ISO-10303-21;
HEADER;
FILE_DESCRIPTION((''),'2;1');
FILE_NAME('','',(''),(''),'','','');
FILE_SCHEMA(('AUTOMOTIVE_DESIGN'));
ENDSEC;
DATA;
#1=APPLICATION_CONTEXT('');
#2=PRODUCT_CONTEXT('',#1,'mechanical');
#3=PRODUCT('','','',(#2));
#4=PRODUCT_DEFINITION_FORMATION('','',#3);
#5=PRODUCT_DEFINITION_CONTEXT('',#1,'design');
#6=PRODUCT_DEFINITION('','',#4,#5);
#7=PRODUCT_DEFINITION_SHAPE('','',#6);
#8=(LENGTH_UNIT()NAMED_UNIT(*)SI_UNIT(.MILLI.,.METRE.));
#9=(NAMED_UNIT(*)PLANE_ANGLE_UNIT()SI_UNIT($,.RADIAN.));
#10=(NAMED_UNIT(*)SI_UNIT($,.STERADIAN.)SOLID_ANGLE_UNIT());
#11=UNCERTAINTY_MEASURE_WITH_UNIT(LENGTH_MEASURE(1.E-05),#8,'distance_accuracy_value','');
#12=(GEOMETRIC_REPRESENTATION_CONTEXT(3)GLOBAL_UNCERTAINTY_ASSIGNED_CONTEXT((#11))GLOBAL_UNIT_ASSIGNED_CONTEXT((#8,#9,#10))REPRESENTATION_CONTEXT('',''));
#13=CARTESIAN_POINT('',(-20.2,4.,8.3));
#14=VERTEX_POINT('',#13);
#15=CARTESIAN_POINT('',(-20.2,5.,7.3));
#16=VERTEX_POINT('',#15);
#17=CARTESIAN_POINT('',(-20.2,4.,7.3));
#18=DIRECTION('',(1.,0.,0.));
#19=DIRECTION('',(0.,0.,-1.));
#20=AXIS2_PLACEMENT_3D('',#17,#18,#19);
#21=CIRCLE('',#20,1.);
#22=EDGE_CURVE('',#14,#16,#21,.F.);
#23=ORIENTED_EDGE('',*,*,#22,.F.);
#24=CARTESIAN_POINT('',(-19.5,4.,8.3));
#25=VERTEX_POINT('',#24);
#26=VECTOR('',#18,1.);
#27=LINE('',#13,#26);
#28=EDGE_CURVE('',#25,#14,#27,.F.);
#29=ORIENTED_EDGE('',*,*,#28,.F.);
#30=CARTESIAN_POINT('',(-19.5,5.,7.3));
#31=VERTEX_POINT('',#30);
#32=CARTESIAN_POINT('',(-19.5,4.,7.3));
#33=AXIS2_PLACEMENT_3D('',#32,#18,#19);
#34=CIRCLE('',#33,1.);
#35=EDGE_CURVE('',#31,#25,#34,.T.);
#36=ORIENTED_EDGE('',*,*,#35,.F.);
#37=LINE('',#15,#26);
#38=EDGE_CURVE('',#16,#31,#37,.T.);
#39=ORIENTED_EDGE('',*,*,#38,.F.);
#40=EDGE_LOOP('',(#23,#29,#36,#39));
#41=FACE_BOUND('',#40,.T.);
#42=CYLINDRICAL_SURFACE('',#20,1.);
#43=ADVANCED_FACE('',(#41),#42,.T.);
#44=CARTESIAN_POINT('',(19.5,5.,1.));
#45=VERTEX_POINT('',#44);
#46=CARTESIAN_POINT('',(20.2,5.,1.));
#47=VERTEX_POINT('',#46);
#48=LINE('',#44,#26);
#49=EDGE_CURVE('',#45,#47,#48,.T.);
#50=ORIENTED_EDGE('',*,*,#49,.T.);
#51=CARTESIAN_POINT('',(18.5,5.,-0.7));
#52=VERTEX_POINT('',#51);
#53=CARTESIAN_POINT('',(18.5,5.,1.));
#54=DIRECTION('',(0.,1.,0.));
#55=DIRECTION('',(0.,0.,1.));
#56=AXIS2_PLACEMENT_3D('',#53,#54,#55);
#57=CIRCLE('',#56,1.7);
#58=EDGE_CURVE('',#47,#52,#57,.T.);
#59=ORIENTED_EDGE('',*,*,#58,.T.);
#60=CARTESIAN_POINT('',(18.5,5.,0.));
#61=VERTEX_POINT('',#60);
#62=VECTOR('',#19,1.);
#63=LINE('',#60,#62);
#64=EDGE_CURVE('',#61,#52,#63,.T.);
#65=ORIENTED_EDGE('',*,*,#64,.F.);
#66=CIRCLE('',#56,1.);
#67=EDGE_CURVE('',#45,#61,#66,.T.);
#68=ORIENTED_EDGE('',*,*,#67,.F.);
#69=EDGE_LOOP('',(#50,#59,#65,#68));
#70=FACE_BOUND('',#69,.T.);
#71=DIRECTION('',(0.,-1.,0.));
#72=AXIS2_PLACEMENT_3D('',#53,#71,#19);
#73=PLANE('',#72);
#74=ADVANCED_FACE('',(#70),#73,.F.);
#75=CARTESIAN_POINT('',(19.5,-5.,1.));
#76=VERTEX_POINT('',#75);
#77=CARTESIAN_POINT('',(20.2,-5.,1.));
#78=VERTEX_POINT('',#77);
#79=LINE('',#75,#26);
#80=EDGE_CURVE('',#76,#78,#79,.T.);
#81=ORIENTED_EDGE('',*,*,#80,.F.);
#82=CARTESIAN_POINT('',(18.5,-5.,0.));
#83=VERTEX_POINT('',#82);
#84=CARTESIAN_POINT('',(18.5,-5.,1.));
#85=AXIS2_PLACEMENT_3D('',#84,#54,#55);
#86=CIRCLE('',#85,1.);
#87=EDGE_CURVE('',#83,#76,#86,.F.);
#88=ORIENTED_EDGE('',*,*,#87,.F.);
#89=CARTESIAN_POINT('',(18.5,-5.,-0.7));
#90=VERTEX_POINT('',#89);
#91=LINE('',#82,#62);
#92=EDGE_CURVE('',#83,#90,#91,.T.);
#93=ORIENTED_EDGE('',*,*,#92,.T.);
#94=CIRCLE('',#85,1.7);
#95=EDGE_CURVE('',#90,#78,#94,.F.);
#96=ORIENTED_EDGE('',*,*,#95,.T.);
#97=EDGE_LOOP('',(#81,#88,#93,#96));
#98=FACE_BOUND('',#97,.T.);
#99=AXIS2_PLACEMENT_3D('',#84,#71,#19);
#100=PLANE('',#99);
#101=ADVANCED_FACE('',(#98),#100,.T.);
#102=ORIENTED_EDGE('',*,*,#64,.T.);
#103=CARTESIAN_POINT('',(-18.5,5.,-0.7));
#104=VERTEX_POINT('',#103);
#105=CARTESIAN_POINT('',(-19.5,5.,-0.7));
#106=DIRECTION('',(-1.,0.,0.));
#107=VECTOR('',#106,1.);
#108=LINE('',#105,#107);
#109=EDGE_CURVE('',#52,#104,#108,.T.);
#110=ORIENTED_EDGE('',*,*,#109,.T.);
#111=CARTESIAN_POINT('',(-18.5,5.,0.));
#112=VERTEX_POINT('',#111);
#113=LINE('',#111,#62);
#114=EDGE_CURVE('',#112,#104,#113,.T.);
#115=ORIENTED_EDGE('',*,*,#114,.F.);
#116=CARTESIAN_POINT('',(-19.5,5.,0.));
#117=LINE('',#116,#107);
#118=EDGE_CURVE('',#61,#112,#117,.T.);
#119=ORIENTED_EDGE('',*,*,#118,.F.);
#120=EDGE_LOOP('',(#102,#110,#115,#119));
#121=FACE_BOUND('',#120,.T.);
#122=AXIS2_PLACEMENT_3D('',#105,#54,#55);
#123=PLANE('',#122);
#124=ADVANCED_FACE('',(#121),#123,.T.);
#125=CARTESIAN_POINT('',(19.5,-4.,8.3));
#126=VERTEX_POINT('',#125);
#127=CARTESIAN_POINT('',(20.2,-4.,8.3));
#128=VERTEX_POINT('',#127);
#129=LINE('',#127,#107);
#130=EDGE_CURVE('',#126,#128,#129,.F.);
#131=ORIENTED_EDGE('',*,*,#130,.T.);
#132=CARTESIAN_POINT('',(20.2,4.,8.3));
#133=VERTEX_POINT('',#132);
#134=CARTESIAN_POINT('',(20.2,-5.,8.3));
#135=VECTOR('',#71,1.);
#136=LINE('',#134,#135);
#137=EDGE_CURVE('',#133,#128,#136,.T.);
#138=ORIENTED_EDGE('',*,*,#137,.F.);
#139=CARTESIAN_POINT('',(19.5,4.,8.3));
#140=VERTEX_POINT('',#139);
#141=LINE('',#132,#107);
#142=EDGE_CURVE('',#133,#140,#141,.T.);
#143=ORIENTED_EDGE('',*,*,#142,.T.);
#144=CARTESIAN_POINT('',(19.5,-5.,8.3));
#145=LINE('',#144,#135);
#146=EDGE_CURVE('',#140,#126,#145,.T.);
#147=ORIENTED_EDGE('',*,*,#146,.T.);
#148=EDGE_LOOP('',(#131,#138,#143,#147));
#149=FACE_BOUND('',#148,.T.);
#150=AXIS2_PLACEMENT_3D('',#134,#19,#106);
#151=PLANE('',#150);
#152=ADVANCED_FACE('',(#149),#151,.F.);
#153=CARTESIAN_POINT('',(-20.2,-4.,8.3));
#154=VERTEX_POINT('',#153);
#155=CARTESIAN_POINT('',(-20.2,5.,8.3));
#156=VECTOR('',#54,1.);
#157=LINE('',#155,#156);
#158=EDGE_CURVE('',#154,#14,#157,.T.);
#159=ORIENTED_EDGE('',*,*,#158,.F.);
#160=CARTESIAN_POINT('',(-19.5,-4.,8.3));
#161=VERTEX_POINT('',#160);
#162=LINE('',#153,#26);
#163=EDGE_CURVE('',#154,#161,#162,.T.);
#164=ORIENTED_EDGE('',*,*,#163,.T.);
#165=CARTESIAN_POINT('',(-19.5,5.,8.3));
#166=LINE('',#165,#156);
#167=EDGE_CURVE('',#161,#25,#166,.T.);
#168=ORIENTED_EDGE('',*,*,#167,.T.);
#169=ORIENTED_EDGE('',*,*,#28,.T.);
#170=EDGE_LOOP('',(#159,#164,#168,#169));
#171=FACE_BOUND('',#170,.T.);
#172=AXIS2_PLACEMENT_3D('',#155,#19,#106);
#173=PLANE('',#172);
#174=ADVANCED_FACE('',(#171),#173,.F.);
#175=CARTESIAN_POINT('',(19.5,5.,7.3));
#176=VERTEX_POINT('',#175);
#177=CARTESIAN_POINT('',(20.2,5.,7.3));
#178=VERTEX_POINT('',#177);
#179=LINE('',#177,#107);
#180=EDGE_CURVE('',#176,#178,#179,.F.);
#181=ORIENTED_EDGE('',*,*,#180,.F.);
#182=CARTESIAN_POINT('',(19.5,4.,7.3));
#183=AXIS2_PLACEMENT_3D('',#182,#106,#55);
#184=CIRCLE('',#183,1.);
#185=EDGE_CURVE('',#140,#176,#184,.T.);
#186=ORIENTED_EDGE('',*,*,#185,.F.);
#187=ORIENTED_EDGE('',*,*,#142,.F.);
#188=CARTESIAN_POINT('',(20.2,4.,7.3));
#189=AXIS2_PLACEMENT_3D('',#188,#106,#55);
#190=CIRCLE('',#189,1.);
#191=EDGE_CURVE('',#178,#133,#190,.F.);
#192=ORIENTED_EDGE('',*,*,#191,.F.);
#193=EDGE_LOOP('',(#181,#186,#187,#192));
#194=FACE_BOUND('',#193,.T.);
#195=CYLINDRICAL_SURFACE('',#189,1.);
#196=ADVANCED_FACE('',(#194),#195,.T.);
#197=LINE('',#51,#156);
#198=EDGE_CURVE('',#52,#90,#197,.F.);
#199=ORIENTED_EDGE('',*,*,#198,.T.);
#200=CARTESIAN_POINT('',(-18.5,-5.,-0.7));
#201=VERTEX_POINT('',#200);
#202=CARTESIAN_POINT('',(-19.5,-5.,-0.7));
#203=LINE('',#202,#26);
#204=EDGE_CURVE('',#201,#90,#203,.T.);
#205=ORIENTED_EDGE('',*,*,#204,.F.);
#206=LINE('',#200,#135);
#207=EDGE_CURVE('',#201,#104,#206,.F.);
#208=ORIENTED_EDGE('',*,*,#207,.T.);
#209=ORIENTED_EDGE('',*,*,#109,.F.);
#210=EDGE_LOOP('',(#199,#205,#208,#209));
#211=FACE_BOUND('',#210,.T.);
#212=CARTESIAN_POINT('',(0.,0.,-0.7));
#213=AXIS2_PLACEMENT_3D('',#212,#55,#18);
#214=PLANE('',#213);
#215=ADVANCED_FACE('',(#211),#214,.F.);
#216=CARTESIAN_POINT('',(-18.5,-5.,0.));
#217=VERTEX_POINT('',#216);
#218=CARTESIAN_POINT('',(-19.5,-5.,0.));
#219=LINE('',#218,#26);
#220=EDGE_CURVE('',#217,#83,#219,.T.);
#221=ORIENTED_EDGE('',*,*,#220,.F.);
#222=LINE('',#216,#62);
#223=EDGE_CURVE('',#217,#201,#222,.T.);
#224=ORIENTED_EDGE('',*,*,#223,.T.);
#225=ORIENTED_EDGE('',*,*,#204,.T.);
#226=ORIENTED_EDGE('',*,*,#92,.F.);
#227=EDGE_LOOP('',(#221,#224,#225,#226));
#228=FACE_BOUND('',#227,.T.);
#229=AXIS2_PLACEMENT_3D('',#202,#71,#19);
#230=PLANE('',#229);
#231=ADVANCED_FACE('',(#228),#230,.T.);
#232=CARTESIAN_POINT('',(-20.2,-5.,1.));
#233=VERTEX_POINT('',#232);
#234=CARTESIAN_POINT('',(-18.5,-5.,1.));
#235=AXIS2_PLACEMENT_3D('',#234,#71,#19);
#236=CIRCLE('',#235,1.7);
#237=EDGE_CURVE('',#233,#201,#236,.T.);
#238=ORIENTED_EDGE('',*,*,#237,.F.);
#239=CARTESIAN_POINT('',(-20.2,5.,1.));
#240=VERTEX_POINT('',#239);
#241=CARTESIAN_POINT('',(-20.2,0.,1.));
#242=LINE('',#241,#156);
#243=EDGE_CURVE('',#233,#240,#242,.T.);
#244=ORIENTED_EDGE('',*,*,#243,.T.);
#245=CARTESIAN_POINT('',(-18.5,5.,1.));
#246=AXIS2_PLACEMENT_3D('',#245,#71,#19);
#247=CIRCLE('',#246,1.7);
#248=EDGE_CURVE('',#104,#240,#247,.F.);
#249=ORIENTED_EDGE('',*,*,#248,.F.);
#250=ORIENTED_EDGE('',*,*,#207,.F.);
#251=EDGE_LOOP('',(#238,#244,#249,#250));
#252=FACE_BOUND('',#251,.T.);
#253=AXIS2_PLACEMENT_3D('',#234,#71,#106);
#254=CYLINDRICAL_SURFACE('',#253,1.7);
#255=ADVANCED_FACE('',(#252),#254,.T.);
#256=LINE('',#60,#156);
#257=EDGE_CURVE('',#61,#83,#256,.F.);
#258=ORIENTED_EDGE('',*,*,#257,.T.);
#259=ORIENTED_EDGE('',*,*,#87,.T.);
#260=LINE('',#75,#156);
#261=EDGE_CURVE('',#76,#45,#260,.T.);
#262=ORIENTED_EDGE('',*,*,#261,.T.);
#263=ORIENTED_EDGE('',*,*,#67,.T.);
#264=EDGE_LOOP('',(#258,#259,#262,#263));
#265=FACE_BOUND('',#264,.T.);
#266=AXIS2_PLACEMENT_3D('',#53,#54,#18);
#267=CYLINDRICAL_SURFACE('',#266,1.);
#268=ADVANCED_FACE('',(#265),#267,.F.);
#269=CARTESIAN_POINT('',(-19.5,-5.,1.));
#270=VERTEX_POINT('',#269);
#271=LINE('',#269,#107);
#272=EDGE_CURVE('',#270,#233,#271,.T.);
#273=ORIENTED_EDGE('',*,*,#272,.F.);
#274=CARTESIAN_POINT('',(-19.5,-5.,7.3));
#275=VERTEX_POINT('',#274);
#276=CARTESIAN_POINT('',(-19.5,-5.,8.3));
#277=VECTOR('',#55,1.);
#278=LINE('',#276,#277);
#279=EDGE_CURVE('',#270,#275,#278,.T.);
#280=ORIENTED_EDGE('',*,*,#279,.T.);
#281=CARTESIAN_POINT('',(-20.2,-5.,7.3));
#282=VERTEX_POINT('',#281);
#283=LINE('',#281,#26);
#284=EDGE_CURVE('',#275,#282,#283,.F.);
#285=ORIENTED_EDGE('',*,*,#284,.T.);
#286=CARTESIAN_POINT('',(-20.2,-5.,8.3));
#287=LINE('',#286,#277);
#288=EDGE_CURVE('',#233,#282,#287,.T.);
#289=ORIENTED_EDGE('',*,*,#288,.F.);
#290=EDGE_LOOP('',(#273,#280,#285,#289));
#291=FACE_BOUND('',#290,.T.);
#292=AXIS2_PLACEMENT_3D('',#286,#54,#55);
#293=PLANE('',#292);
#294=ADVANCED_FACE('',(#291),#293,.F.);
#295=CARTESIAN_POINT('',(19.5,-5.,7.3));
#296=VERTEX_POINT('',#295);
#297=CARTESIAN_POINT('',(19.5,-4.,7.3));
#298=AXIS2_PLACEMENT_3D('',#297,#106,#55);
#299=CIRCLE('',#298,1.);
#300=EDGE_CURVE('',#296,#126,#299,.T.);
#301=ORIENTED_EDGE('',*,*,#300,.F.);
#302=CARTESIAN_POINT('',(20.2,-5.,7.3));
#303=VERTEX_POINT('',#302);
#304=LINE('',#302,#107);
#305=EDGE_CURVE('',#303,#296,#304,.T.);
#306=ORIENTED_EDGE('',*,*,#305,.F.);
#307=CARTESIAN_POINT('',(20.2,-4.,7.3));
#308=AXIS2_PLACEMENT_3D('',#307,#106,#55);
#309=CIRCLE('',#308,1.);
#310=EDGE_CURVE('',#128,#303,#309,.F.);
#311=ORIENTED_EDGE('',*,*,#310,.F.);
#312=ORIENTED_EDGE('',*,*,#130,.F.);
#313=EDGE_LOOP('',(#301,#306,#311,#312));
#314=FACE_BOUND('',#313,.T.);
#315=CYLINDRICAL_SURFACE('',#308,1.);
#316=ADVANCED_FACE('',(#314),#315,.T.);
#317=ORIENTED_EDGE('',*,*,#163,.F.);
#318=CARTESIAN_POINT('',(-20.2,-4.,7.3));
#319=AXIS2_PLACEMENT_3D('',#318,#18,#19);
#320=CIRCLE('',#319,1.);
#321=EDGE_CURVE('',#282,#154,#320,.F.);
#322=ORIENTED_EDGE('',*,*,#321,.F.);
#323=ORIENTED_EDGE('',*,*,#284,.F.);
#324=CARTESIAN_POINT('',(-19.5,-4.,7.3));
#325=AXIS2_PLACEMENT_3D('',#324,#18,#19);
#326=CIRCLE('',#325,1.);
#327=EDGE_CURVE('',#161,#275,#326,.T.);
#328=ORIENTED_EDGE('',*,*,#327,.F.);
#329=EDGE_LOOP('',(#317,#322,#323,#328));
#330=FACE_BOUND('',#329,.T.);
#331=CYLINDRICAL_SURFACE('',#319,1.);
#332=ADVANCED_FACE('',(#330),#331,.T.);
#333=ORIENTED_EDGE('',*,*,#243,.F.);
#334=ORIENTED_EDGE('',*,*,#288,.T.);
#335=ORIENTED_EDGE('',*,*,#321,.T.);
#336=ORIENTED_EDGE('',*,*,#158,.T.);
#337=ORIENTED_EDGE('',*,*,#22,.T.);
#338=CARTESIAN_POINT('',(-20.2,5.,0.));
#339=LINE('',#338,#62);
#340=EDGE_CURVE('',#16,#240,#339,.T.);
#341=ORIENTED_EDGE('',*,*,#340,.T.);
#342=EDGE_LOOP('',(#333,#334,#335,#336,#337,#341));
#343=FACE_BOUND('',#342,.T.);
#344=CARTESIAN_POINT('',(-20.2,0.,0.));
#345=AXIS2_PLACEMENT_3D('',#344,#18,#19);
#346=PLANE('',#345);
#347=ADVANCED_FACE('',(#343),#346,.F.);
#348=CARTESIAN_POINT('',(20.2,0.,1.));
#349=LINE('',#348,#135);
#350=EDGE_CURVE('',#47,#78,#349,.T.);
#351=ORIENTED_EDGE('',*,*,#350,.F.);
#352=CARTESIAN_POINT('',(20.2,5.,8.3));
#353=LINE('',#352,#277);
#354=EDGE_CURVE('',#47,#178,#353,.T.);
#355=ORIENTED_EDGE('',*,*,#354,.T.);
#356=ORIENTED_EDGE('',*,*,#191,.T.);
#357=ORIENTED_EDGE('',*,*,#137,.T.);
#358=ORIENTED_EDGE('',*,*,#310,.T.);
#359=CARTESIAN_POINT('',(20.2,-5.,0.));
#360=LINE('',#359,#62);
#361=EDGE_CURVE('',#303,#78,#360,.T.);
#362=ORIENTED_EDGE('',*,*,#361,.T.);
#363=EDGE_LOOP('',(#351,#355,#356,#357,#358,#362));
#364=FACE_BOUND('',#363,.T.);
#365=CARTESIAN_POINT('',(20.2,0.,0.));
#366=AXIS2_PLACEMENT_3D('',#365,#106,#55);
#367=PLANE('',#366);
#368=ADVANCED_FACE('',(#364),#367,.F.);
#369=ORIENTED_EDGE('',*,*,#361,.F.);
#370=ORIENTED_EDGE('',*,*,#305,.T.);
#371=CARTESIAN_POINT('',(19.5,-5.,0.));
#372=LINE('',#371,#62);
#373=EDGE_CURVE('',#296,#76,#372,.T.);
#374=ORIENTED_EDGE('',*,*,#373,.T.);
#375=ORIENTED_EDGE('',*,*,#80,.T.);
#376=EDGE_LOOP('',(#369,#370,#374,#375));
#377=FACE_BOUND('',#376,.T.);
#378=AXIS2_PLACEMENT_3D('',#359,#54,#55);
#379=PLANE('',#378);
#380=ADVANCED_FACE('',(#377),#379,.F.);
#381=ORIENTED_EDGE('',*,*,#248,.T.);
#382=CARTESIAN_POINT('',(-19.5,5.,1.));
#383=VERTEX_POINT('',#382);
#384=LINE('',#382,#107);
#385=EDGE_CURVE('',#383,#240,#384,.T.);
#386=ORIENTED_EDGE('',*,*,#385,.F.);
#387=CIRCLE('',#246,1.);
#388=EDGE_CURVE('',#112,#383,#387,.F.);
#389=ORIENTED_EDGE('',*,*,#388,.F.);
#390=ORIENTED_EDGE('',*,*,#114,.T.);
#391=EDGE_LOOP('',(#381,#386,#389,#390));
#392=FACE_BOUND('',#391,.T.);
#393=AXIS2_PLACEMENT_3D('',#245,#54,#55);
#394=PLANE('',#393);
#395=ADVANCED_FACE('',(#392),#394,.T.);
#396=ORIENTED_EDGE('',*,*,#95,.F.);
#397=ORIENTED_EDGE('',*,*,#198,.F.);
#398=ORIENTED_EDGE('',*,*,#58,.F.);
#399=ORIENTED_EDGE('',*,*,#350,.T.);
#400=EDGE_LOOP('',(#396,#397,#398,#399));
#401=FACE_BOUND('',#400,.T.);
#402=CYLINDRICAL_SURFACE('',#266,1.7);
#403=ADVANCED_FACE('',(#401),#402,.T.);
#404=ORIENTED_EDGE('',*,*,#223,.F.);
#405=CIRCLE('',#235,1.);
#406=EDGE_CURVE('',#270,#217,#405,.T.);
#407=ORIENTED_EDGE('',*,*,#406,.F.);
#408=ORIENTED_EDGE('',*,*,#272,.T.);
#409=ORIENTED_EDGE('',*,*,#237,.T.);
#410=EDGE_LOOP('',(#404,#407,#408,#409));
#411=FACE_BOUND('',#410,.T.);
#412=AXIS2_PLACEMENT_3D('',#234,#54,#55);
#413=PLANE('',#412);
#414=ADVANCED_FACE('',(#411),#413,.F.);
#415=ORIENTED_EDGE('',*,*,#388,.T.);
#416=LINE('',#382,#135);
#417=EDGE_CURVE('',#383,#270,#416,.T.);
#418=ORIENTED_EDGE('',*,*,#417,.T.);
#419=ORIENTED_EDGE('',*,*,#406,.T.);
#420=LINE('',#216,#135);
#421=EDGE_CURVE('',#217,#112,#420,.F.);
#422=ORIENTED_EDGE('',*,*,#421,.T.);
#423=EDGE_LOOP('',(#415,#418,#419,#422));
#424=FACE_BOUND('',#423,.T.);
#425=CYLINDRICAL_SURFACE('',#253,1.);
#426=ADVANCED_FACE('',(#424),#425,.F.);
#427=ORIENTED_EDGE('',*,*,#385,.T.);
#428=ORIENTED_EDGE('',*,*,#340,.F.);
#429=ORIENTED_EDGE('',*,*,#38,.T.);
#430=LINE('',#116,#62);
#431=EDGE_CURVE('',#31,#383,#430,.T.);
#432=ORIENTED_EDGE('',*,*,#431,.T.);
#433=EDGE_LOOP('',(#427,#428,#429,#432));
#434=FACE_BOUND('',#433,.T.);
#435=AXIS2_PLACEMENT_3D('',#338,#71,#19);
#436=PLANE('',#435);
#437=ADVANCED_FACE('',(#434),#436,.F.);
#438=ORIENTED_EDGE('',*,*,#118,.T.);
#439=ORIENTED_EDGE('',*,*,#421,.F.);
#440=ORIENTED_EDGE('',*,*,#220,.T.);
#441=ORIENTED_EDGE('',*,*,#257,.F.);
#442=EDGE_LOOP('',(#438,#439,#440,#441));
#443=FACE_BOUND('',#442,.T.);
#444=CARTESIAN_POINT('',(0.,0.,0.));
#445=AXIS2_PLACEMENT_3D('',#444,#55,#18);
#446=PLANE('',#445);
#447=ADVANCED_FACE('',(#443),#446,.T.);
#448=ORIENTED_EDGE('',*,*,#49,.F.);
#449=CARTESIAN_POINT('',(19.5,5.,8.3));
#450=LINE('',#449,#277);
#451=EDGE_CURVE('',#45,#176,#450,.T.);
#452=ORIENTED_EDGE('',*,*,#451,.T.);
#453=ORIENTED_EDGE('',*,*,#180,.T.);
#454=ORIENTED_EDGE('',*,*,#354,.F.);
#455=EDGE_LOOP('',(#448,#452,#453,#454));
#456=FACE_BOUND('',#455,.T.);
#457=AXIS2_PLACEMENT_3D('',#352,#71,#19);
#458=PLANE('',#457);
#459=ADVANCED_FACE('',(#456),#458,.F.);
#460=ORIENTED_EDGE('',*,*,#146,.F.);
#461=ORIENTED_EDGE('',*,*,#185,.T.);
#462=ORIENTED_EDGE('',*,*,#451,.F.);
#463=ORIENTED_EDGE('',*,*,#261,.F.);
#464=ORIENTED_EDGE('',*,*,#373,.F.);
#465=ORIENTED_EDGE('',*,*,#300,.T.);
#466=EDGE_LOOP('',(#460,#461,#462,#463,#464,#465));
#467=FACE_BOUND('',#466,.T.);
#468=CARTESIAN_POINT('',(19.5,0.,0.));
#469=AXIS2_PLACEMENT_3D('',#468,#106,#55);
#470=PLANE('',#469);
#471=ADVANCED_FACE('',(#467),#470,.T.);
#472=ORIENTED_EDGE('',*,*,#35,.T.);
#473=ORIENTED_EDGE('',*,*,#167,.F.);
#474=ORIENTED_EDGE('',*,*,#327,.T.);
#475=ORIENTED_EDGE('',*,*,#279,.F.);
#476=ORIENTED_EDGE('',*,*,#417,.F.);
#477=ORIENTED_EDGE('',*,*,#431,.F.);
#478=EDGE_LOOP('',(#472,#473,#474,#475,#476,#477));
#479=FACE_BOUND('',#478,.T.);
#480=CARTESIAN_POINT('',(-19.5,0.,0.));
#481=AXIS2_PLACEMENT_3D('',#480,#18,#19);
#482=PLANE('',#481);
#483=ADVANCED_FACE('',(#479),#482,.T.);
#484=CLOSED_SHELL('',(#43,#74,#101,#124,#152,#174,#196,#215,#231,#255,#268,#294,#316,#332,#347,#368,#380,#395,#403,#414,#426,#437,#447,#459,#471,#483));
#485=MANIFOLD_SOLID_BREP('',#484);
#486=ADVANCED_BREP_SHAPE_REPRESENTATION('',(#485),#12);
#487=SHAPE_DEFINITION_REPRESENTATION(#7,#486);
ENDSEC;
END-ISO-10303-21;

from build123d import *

# Parameters (mm, degrees)
SKETCH2_W                    = 39
SKETCH2_H                    = 10
BASE_FLANGE1_DEPTH           = 0.7
EDGE_FLANGE1_STRIP_W         = 4.8
EDGE_FLANGE1_STRIP_H         = 0.7
EDGE_FLANGE1_STRIP_CUT_DEPTH = 10
EDGE_FLANGE1_DEPTH           = 10
EDGE_FLANGE2_STRIP_W         = 4.8
EDGE_FLANGE2_STRIP_H         = 0.7
EDGE_FLANGE2_STRIP_CUT_DEPTH = 10
EDGE_FLANGE2_DEPTH           = 10
FILLET1_R                    = 1


# Sheet-metal steps are written as plain solids
with BuildPart() as part:
    # Sketch2 → Base-Flange1 (new body)
    with BuildSketch(Plane.XY):
        Rectangle(SKETCH2_W, SKETCH2_H)
    extrude(amount=-BASE_FLANGE1_DEPTH)

    # Edge-Flange1 strip (across the edge) → Edge-Flange1 strip cut (cut)
    with BuildSketch(Plane(origin=(-19.5, 5, 0), x_dir=(1, 0, 0), z_dir=(0, -1, 0))):
        with Locations((-1.4, -0.35)):
            Rectangle(EDGE_FLANGE1_STRIP_W, EDGE_FLANGE1_STRIP_H)
    extrude(amount=EDGE_FLANGE1_STRIP_CUT_DEPTH, mode=Mode.SUBTRACT)

    # Edge-Flange1 section (across the edge) → Edge-Flange1 (add)
    with BuildSketch(Plane(origin=(-19.5, 5, 0), x_dir=(1, 0, 0), z_dir=(0, -1, 0))):
        with BuildLine():
            Line((-0.7, 1), (-0.7, 8.3))
            Line((-0.7, 8.3), (0, 8.3))
            Line((0, 8.3), (0, 1))
            ThreePointArc((0, 1), (0.292893219, 0.292893219), (1, 0))
            Line((1, 0), (1, -0.7))
            ThreePointArc((1, -0.7), (-0.202081528, -0.202081528), (-0.7, 1))
        make_face()
    extrude(amount=EDGE_FLANGE1_DEPTH)

    # Edge-Flange2 strip (across the edge) → Edge-Flange2 strip cut (cut)
    with BuildSketch(Plane(origin=(19.5, -5, 0), x_dir=(-1, 0, 0), z_dir=(0, 1, 0))):
        with Locations((-1.4, -0.35)):
            Rectangle(EDGE_FLANGE2_STRIP_W, EDGE_FLANGE2_STRIP_H)
    extrude(amount=EDGE_FLANGE2_STRIP_CUT_DEPTH, mode=Mode.SUBTRACT)

    # Edge-Flange2 section (across the edge) → Edge-Flange2 (add)
    with BuildSketch(Plane(origin=(19.5, -5, 0), x_dir=(-1, 0, 0), z_dir=(0, 1, 0))):
        with BuildLine():
            Line((-0.7, 1), (-0.7, 8.3))
            Line((-0.7, 8.3), (0, 8.3))
            Line((0, 8.3), (0, 1))
            ThreePointArc((0, 1), (0.292893219, 0.292893219), (1, 0))
            Line((1, 0), (1, -0.7))
            ThreePointArc((1, -0.7), (-0.202081528, -0.202081528), (-0.7, 1))
        make_face()
    extrude(amount=EDGE_FLANGE2_DEPTH)

    # Fillet1
    fillet1_edges = [part.edges().sort_by_distance(p)[0] for p in [
        (-19.85, 5, 8.3),
        (-19.85, -5, 8.3),
        (19.85, -5, 8.3),
        (19.85, 5, 8.3),
    ]]
    fillet(fillet1_edges, radius=FILLET1_R)


solid = part.part
